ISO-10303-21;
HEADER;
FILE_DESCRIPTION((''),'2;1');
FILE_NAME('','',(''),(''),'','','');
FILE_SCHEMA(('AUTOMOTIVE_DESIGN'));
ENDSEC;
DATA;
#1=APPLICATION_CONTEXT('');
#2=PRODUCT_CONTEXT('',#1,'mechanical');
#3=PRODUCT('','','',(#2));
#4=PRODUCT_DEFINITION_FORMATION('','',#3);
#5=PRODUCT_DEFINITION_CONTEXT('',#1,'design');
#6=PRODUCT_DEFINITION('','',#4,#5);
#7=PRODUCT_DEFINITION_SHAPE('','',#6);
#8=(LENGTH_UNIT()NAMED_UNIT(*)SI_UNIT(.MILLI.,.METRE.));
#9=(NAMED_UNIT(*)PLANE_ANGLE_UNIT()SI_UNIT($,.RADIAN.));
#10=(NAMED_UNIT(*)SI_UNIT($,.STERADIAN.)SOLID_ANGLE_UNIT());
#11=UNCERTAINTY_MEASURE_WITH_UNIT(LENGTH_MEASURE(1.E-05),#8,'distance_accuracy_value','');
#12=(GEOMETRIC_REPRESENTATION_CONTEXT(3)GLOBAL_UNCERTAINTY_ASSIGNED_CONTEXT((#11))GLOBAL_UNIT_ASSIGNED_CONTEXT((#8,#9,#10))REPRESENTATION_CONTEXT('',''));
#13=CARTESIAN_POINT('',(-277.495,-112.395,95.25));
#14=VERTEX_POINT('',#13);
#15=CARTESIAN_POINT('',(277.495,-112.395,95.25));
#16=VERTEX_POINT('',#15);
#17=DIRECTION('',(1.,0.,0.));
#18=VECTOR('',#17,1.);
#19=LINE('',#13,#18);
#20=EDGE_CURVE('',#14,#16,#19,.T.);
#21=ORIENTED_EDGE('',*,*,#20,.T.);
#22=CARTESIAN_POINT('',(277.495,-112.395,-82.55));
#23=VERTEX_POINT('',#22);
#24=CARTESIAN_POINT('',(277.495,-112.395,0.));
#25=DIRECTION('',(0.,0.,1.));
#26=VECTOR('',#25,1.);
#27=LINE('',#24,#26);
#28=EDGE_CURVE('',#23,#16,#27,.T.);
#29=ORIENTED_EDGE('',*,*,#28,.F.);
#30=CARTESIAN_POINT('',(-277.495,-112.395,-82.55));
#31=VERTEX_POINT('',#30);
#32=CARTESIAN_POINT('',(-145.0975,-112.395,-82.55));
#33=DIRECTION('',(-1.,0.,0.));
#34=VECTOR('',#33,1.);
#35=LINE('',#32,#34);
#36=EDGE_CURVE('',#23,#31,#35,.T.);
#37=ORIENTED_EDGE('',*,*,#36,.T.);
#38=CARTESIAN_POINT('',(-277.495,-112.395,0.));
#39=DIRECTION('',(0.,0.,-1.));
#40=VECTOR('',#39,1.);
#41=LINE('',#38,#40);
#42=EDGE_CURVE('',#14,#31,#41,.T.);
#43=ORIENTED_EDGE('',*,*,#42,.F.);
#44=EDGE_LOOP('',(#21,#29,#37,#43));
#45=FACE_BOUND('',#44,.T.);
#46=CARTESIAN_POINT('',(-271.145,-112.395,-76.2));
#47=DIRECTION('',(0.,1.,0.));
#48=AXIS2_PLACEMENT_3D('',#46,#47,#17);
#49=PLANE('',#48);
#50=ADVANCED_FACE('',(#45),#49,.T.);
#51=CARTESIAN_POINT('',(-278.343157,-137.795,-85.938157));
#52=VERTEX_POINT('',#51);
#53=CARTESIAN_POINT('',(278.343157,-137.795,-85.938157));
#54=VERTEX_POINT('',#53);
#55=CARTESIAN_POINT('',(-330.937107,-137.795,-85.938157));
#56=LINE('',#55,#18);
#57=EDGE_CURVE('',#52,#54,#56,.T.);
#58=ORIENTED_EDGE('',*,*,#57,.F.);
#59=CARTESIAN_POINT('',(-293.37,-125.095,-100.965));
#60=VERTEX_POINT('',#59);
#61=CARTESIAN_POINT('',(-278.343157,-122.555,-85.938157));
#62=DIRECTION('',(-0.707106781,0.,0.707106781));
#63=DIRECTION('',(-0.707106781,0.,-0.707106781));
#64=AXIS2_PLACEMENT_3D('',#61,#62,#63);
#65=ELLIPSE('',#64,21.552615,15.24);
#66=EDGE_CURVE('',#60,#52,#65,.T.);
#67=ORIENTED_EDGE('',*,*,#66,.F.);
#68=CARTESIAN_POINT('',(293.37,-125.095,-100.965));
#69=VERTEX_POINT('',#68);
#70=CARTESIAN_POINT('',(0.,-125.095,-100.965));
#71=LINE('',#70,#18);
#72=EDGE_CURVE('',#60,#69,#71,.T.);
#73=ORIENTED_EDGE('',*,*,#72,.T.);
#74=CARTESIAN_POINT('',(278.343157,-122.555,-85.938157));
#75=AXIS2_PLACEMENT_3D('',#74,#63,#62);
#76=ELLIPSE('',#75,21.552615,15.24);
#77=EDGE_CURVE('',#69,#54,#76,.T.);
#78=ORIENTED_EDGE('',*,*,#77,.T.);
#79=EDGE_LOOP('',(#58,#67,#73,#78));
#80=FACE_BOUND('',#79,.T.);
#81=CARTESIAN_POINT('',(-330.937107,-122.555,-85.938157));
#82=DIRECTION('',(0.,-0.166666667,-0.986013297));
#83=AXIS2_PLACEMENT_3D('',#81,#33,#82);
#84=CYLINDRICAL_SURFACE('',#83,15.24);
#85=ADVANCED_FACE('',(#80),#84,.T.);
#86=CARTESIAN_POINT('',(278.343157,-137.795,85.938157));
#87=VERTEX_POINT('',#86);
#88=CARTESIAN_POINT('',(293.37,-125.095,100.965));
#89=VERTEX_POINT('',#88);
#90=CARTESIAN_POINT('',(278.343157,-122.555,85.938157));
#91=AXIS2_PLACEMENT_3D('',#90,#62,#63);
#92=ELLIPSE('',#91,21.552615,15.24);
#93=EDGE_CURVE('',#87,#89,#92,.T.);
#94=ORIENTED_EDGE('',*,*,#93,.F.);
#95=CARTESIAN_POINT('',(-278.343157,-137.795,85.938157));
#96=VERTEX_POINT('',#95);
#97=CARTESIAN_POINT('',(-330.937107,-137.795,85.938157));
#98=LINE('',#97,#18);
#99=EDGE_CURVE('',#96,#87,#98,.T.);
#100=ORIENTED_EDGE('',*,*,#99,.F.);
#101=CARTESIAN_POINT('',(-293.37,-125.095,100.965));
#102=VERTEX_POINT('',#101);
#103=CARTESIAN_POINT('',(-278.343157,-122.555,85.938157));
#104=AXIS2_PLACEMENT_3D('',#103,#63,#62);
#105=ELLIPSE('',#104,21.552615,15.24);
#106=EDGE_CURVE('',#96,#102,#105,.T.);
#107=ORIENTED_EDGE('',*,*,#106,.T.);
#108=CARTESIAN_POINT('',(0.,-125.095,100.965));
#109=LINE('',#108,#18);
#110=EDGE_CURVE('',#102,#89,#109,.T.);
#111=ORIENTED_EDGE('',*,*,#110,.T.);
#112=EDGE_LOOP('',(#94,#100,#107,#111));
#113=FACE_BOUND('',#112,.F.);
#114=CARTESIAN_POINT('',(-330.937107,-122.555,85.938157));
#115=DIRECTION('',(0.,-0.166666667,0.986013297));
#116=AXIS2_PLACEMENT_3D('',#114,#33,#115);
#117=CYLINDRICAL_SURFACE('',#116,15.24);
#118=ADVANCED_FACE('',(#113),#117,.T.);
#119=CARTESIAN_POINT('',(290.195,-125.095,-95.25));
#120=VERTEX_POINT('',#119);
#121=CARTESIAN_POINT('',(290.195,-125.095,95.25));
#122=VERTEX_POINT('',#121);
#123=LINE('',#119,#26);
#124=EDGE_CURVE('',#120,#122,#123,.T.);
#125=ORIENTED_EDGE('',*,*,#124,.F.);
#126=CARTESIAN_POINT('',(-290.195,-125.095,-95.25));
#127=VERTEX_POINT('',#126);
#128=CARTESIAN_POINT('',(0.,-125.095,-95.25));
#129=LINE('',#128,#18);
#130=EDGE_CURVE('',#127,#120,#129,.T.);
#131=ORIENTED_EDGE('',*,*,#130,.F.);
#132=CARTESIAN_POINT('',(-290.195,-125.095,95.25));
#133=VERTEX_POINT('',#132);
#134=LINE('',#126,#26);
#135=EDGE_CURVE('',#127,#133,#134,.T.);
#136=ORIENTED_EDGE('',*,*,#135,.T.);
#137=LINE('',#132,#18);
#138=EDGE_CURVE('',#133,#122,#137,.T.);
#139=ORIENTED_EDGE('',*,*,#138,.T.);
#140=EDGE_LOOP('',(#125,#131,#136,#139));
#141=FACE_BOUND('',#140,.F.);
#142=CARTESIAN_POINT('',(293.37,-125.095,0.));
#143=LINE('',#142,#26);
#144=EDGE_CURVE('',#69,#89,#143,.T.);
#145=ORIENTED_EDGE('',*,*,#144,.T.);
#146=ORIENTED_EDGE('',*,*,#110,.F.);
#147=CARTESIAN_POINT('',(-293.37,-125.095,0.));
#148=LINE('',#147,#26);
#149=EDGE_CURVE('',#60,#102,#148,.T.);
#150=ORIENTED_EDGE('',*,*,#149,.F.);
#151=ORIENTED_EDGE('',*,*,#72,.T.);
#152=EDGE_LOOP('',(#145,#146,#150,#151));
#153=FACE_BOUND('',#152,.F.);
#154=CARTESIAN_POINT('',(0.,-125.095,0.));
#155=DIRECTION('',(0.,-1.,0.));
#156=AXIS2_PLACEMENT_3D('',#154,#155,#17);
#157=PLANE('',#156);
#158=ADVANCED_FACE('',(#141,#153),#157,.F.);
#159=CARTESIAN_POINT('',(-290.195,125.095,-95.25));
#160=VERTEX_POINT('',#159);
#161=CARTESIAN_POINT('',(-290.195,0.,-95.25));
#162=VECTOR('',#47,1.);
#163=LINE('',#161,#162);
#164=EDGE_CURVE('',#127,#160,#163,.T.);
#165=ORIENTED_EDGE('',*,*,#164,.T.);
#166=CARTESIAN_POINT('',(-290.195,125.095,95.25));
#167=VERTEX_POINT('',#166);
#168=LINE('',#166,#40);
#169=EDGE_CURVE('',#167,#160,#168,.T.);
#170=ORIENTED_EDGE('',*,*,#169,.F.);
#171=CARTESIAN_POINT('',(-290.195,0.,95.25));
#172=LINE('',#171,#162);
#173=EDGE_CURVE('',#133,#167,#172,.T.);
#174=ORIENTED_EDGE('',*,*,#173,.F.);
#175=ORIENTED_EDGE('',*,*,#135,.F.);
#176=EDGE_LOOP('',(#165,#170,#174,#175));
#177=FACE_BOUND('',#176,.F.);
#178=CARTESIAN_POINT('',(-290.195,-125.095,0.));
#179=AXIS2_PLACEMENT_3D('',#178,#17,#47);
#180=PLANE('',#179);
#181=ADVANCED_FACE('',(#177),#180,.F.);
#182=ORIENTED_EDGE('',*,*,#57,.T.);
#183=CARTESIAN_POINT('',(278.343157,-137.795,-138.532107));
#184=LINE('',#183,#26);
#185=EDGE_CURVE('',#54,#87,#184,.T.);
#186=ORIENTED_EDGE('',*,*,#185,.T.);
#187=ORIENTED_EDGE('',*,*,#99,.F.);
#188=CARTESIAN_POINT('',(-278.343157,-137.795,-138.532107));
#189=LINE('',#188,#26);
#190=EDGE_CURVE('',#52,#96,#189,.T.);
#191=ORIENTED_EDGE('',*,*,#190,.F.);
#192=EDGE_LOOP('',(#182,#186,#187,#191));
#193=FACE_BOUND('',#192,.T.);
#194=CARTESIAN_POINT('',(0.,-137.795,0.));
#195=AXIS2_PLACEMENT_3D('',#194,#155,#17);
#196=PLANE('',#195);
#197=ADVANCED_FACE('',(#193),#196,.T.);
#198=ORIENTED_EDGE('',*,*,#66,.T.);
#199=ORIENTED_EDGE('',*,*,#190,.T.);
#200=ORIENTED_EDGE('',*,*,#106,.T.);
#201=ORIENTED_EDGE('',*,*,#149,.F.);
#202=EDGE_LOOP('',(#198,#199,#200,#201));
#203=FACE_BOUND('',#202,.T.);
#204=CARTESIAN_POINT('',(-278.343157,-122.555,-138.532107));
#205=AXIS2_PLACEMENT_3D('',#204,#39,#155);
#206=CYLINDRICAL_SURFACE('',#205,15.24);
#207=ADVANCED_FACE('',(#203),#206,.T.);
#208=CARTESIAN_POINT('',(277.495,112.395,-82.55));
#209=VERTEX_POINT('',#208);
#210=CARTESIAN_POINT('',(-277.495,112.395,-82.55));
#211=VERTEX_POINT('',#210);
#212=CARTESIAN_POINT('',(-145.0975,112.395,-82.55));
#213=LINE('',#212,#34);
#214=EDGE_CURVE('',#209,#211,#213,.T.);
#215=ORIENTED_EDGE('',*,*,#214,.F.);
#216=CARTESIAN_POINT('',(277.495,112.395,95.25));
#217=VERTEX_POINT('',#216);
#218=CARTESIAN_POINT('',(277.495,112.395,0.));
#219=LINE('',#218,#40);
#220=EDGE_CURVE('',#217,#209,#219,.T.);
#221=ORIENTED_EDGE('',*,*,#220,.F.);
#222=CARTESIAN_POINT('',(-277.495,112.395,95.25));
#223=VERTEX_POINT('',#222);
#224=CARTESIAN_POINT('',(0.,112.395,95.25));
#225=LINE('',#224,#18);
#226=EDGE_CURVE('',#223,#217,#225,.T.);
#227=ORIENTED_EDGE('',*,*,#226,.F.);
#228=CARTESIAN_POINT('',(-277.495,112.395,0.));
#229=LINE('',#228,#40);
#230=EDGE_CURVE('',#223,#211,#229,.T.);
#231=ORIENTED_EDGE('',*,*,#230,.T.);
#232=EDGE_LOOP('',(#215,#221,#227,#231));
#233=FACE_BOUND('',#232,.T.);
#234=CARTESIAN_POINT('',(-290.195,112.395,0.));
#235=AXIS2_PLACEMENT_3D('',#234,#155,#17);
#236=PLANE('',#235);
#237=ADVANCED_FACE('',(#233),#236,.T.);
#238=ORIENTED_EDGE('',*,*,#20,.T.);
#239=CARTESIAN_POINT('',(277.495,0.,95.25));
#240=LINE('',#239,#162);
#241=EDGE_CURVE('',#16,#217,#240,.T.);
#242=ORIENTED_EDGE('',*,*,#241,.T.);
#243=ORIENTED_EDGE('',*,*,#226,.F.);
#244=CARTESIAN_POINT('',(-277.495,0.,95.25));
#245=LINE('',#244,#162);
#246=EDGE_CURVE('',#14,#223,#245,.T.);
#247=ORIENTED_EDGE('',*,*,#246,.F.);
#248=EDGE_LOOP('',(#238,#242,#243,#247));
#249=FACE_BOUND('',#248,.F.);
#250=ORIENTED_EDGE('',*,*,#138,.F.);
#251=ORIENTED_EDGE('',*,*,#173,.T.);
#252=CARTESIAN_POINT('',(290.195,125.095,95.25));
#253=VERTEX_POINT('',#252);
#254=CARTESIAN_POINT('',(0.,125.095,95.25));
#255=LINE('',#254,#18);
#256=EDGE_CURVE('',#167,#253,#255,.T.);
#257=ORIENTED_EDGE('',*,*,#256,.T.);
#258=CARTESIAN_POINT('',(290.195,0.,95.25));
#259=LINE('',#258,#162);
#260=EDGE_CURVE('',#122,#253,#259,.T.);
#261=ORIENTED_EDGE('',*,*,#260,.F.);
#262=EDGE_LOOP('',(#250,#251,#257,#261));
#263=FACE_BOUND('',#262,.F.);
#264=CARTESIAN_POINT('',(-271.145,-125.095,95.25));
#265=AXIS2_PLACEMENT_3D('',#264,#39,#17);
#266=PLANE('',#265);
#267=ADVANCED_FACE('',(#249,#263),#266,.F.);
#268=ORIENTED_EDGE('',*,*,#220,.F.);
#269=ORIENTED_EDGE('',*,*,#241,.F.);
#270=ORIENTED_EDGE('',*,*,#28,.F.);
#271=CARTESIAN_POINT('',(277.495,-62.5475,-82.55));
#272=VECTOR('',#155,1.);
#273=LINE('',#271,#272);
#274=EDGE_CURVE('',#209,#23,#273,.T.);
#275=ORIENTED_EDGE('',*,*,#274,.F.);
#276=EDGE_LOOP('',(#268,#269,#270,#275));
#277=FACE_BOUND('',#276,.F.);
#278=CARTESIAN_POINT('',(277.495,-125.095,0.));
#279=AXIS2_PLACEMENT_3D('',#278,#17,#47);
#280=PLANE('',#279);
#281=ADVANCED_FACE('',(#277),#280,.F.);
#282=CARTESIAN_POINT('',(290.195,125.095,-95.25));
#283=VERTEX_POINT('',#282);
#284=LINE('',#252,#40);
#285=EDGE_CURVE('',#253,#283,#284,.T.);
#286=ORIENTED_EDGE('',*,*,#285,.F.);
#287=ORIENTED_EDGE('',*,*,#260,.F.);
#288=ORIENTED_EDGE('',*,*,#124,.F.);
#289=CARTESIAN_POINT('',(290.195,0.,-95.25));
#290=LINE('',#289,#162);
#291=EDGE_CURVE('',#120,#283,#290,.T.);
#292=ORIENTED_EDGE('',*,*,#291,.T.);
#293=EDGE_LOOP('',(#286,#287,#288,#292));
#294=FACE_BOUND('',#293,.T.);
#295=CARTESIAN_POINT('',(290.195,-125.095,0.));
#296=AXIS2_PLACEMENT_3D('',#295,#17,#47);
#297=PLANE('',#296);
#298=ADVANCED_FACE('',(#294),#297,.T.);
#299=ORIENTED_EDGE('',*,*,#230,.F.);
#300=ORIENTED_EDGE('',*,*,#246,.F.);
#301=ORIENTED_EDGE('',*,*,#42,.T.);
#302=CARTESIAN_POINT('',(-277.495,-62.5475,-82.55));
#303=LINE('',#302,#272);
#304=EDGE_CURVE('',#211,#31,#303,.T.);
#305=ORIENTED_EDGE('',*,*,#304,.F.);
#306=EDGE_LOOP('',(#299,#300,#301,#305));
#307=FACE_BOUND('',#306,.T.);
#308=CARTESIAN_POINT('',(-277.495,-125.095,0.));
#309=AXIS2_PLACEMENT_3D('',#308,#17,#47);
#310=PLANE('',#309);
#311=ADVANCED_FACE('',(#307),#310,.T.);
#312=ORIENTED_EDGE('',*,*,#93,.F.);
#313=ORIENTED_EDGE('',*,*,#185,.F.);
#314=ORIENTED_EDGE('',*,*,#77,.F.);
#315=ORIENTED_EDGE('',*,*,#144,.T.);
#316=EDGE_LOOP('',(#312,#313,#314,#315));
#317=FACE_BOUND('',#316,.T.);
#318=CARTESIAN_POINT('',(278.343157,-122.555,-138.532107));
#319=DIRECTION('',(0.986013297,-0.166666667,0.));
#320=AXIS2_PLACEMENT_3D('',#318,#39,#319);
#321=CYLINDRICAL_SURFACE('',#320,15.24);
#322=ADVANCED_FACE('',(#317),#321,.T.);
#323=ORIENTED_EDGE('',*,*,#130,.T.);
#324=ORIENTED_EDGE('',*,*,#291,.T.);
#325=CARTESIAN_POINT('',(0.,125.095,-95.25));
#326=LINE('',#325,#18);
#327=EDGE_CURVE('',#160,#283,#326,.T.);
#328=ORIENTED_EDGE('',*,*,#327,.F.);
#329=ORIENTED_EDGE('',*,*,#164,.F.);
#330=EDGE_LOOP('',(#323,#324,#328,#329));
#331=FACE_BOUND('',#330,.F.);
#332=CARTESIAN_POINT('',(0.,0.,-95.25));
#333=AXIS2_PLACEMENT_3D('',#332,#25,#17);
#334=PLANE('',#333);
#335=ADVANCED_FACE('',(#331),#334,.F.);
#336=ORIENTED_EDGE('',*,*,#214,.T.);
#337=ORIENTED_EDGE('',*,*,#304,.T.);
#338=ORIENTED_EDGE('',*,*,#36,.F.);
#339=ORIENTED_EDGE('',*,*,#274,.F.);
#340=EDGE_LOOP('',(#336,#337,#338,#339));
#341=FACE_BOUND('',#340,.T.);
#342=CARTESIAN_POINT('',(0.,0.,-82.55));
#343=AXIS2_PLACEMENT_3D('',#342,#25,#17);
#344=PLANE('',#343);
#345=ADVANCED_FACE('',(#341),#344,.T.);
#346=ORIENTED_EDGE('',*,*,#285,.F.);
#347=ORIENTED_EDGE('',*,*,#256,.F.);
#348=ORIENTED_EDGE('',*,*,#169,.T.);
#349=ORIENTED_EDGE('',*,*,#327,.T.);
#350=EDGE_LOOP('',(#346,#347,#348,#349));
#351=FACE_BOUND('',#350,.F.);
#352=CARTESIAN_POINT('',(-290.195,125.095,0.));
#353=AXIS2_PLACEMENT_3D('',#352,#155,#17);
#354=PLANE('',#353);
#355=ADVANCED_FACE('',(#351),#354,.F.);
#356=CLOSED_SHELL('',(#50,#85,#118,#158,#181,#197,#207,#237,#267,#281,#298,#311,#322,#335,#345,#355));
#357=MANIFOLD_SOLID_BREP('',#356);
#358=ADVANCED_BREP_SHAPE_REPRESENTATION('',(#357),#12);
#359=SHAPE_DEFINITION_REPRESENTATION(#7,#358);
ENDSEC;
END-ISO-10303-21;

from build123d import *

# Parameters (mm, degrees)
F0_W        = 580.39
F0_H        = 250.19
F1_DEPTH    = 95.25
F2_T        = -12.7
F3_W        = 542.29
F3_H        = 171.45
F4_DEPTH    = 25.4
F5_W        = 586.74
F5_H        = 201.93
F6_DEPTH    = 12.7
F7_T1_DEPTH = 661.8742132454
F7_T3_DEPTH = 277.0642132454
F8_DEPTH    = 171.45


# Not quite as in the source:
# - a fillet or chamfer that OpenCascade refuses, or shapes differently, is made with other operations: its cross-section is extruded or revolved along the edge and cut away or added


with BuildPart() as f1:
    # F0 (on Top) → F1 (new body, symmetric)
    with BuildSketch(Plane.XY):
        Rectangle(F0_W, F0_H)
    extrude(amount=F1_DEPTH, both=True)

    # F2
    f2_openings = [f1.faces().sort_by_distance(p)[0] for p in [
        (0, 0, 95.25),
    ]]
    offset(amount=F2_T, openings=f2_openings)

    # F3 (on face) → F4 (cut)
    with BuildSketch(Plane.XZ.offset(125.095)):
        with Locations((0, 9.525)):
            Rectangle(F3_W, F3_H)
    extrude(amount=-F4_DEPTH, mode=Mode.SUBTRACT)

    # F5 (on face) → F6 (join)
    with BuildSketch(Plane.XZ.offset(125.095)):
        Rectangle(F5_W, F5_H)
        Polygon((-290.195, -95.25), (-290.195, 95.25), (-271.145, 95.25), (-271.145, -76.2), (271.145, -76.2), (271.145, 95.25), (290.195, 95.25), (290.195, -95.25), align=None, mode=Mode.SUBTRACT)
        Polygon((-271.145, 95.25), (-290.195, 95.25), (-290.195, -95.25), (290.195, -95.25), (290.195, 95.25), (271.145, 95.25), (271.145, -76.2), (-271.145, -76.2), align=None)
    extrude(amount=F6_DEPTH)

    # F7: fillet of radius 15.24 on 4 edges, made by hand

    # F7_s2 → F7_t1 (cut)
    with BuildSketch(Plane.YZ.offset(-330.9371066227)):
        with BuildLine():
            ThreePointArc((-125.095, 100.965), (-134.1947422652, 95.7755350503), (-137.795, 85.9381573509))
            Line((-137.795, 85.9381573509), (-137.795, 100.965))
            Line((-137.795, 100.965), (-125.095, 100.965))
        make_face()
        with BuildLine():
            ThreePointArc((-125.095, -100.965), (-134.1947422652, -95.7755350503), (-137.795, -85.9381573509))
            Line((-137.795, -85.9381573509), (-137.795, -100.965))
            Line((-137.795, -100.965), (-125.095, -100.965))
        make_face()
    extrude(amount=F7_T1_DEPTH, mode=Mode.SUBTRACT)

    # F7_s4 → F7_t3 (cut)
    with BuildSketch(Plane.XY.offset(-138.5321066227)):
        with BuildLine():
            ThreePointArc((-278.3431573509, -137.795), (-288.1805350503, -134.1947422652), (-293.37, -125.095))
            Line((-293.37, -125.095), (-293.37, -137.795))
            Line((-293.37, -137.795), (-278.3431573509, -137.795))
        make_face()
        with BuildLine():
            ThreePointArc((293.37, -125.095), (288.1805350503, -134.1947422652), (278.3431573509, -137.795))
            Line((278.3431573509, -137.795), (293.37, -137.795))
            Line((293.37, -137.795), (293.37, -125.095))
        make_face()
    extrude(amount=F7_T3_DEPTH, mode=Mode.SUBTRACT)

    # F8 (add): a face of the model
    f8_faces = [f1.faces().sort_by_distance(p)[0] for p in [
        (0, -118.745, -76.2),
    ]]
    extrude(f8_faces, amount=F8_DEPTH)


solid = f1.part
